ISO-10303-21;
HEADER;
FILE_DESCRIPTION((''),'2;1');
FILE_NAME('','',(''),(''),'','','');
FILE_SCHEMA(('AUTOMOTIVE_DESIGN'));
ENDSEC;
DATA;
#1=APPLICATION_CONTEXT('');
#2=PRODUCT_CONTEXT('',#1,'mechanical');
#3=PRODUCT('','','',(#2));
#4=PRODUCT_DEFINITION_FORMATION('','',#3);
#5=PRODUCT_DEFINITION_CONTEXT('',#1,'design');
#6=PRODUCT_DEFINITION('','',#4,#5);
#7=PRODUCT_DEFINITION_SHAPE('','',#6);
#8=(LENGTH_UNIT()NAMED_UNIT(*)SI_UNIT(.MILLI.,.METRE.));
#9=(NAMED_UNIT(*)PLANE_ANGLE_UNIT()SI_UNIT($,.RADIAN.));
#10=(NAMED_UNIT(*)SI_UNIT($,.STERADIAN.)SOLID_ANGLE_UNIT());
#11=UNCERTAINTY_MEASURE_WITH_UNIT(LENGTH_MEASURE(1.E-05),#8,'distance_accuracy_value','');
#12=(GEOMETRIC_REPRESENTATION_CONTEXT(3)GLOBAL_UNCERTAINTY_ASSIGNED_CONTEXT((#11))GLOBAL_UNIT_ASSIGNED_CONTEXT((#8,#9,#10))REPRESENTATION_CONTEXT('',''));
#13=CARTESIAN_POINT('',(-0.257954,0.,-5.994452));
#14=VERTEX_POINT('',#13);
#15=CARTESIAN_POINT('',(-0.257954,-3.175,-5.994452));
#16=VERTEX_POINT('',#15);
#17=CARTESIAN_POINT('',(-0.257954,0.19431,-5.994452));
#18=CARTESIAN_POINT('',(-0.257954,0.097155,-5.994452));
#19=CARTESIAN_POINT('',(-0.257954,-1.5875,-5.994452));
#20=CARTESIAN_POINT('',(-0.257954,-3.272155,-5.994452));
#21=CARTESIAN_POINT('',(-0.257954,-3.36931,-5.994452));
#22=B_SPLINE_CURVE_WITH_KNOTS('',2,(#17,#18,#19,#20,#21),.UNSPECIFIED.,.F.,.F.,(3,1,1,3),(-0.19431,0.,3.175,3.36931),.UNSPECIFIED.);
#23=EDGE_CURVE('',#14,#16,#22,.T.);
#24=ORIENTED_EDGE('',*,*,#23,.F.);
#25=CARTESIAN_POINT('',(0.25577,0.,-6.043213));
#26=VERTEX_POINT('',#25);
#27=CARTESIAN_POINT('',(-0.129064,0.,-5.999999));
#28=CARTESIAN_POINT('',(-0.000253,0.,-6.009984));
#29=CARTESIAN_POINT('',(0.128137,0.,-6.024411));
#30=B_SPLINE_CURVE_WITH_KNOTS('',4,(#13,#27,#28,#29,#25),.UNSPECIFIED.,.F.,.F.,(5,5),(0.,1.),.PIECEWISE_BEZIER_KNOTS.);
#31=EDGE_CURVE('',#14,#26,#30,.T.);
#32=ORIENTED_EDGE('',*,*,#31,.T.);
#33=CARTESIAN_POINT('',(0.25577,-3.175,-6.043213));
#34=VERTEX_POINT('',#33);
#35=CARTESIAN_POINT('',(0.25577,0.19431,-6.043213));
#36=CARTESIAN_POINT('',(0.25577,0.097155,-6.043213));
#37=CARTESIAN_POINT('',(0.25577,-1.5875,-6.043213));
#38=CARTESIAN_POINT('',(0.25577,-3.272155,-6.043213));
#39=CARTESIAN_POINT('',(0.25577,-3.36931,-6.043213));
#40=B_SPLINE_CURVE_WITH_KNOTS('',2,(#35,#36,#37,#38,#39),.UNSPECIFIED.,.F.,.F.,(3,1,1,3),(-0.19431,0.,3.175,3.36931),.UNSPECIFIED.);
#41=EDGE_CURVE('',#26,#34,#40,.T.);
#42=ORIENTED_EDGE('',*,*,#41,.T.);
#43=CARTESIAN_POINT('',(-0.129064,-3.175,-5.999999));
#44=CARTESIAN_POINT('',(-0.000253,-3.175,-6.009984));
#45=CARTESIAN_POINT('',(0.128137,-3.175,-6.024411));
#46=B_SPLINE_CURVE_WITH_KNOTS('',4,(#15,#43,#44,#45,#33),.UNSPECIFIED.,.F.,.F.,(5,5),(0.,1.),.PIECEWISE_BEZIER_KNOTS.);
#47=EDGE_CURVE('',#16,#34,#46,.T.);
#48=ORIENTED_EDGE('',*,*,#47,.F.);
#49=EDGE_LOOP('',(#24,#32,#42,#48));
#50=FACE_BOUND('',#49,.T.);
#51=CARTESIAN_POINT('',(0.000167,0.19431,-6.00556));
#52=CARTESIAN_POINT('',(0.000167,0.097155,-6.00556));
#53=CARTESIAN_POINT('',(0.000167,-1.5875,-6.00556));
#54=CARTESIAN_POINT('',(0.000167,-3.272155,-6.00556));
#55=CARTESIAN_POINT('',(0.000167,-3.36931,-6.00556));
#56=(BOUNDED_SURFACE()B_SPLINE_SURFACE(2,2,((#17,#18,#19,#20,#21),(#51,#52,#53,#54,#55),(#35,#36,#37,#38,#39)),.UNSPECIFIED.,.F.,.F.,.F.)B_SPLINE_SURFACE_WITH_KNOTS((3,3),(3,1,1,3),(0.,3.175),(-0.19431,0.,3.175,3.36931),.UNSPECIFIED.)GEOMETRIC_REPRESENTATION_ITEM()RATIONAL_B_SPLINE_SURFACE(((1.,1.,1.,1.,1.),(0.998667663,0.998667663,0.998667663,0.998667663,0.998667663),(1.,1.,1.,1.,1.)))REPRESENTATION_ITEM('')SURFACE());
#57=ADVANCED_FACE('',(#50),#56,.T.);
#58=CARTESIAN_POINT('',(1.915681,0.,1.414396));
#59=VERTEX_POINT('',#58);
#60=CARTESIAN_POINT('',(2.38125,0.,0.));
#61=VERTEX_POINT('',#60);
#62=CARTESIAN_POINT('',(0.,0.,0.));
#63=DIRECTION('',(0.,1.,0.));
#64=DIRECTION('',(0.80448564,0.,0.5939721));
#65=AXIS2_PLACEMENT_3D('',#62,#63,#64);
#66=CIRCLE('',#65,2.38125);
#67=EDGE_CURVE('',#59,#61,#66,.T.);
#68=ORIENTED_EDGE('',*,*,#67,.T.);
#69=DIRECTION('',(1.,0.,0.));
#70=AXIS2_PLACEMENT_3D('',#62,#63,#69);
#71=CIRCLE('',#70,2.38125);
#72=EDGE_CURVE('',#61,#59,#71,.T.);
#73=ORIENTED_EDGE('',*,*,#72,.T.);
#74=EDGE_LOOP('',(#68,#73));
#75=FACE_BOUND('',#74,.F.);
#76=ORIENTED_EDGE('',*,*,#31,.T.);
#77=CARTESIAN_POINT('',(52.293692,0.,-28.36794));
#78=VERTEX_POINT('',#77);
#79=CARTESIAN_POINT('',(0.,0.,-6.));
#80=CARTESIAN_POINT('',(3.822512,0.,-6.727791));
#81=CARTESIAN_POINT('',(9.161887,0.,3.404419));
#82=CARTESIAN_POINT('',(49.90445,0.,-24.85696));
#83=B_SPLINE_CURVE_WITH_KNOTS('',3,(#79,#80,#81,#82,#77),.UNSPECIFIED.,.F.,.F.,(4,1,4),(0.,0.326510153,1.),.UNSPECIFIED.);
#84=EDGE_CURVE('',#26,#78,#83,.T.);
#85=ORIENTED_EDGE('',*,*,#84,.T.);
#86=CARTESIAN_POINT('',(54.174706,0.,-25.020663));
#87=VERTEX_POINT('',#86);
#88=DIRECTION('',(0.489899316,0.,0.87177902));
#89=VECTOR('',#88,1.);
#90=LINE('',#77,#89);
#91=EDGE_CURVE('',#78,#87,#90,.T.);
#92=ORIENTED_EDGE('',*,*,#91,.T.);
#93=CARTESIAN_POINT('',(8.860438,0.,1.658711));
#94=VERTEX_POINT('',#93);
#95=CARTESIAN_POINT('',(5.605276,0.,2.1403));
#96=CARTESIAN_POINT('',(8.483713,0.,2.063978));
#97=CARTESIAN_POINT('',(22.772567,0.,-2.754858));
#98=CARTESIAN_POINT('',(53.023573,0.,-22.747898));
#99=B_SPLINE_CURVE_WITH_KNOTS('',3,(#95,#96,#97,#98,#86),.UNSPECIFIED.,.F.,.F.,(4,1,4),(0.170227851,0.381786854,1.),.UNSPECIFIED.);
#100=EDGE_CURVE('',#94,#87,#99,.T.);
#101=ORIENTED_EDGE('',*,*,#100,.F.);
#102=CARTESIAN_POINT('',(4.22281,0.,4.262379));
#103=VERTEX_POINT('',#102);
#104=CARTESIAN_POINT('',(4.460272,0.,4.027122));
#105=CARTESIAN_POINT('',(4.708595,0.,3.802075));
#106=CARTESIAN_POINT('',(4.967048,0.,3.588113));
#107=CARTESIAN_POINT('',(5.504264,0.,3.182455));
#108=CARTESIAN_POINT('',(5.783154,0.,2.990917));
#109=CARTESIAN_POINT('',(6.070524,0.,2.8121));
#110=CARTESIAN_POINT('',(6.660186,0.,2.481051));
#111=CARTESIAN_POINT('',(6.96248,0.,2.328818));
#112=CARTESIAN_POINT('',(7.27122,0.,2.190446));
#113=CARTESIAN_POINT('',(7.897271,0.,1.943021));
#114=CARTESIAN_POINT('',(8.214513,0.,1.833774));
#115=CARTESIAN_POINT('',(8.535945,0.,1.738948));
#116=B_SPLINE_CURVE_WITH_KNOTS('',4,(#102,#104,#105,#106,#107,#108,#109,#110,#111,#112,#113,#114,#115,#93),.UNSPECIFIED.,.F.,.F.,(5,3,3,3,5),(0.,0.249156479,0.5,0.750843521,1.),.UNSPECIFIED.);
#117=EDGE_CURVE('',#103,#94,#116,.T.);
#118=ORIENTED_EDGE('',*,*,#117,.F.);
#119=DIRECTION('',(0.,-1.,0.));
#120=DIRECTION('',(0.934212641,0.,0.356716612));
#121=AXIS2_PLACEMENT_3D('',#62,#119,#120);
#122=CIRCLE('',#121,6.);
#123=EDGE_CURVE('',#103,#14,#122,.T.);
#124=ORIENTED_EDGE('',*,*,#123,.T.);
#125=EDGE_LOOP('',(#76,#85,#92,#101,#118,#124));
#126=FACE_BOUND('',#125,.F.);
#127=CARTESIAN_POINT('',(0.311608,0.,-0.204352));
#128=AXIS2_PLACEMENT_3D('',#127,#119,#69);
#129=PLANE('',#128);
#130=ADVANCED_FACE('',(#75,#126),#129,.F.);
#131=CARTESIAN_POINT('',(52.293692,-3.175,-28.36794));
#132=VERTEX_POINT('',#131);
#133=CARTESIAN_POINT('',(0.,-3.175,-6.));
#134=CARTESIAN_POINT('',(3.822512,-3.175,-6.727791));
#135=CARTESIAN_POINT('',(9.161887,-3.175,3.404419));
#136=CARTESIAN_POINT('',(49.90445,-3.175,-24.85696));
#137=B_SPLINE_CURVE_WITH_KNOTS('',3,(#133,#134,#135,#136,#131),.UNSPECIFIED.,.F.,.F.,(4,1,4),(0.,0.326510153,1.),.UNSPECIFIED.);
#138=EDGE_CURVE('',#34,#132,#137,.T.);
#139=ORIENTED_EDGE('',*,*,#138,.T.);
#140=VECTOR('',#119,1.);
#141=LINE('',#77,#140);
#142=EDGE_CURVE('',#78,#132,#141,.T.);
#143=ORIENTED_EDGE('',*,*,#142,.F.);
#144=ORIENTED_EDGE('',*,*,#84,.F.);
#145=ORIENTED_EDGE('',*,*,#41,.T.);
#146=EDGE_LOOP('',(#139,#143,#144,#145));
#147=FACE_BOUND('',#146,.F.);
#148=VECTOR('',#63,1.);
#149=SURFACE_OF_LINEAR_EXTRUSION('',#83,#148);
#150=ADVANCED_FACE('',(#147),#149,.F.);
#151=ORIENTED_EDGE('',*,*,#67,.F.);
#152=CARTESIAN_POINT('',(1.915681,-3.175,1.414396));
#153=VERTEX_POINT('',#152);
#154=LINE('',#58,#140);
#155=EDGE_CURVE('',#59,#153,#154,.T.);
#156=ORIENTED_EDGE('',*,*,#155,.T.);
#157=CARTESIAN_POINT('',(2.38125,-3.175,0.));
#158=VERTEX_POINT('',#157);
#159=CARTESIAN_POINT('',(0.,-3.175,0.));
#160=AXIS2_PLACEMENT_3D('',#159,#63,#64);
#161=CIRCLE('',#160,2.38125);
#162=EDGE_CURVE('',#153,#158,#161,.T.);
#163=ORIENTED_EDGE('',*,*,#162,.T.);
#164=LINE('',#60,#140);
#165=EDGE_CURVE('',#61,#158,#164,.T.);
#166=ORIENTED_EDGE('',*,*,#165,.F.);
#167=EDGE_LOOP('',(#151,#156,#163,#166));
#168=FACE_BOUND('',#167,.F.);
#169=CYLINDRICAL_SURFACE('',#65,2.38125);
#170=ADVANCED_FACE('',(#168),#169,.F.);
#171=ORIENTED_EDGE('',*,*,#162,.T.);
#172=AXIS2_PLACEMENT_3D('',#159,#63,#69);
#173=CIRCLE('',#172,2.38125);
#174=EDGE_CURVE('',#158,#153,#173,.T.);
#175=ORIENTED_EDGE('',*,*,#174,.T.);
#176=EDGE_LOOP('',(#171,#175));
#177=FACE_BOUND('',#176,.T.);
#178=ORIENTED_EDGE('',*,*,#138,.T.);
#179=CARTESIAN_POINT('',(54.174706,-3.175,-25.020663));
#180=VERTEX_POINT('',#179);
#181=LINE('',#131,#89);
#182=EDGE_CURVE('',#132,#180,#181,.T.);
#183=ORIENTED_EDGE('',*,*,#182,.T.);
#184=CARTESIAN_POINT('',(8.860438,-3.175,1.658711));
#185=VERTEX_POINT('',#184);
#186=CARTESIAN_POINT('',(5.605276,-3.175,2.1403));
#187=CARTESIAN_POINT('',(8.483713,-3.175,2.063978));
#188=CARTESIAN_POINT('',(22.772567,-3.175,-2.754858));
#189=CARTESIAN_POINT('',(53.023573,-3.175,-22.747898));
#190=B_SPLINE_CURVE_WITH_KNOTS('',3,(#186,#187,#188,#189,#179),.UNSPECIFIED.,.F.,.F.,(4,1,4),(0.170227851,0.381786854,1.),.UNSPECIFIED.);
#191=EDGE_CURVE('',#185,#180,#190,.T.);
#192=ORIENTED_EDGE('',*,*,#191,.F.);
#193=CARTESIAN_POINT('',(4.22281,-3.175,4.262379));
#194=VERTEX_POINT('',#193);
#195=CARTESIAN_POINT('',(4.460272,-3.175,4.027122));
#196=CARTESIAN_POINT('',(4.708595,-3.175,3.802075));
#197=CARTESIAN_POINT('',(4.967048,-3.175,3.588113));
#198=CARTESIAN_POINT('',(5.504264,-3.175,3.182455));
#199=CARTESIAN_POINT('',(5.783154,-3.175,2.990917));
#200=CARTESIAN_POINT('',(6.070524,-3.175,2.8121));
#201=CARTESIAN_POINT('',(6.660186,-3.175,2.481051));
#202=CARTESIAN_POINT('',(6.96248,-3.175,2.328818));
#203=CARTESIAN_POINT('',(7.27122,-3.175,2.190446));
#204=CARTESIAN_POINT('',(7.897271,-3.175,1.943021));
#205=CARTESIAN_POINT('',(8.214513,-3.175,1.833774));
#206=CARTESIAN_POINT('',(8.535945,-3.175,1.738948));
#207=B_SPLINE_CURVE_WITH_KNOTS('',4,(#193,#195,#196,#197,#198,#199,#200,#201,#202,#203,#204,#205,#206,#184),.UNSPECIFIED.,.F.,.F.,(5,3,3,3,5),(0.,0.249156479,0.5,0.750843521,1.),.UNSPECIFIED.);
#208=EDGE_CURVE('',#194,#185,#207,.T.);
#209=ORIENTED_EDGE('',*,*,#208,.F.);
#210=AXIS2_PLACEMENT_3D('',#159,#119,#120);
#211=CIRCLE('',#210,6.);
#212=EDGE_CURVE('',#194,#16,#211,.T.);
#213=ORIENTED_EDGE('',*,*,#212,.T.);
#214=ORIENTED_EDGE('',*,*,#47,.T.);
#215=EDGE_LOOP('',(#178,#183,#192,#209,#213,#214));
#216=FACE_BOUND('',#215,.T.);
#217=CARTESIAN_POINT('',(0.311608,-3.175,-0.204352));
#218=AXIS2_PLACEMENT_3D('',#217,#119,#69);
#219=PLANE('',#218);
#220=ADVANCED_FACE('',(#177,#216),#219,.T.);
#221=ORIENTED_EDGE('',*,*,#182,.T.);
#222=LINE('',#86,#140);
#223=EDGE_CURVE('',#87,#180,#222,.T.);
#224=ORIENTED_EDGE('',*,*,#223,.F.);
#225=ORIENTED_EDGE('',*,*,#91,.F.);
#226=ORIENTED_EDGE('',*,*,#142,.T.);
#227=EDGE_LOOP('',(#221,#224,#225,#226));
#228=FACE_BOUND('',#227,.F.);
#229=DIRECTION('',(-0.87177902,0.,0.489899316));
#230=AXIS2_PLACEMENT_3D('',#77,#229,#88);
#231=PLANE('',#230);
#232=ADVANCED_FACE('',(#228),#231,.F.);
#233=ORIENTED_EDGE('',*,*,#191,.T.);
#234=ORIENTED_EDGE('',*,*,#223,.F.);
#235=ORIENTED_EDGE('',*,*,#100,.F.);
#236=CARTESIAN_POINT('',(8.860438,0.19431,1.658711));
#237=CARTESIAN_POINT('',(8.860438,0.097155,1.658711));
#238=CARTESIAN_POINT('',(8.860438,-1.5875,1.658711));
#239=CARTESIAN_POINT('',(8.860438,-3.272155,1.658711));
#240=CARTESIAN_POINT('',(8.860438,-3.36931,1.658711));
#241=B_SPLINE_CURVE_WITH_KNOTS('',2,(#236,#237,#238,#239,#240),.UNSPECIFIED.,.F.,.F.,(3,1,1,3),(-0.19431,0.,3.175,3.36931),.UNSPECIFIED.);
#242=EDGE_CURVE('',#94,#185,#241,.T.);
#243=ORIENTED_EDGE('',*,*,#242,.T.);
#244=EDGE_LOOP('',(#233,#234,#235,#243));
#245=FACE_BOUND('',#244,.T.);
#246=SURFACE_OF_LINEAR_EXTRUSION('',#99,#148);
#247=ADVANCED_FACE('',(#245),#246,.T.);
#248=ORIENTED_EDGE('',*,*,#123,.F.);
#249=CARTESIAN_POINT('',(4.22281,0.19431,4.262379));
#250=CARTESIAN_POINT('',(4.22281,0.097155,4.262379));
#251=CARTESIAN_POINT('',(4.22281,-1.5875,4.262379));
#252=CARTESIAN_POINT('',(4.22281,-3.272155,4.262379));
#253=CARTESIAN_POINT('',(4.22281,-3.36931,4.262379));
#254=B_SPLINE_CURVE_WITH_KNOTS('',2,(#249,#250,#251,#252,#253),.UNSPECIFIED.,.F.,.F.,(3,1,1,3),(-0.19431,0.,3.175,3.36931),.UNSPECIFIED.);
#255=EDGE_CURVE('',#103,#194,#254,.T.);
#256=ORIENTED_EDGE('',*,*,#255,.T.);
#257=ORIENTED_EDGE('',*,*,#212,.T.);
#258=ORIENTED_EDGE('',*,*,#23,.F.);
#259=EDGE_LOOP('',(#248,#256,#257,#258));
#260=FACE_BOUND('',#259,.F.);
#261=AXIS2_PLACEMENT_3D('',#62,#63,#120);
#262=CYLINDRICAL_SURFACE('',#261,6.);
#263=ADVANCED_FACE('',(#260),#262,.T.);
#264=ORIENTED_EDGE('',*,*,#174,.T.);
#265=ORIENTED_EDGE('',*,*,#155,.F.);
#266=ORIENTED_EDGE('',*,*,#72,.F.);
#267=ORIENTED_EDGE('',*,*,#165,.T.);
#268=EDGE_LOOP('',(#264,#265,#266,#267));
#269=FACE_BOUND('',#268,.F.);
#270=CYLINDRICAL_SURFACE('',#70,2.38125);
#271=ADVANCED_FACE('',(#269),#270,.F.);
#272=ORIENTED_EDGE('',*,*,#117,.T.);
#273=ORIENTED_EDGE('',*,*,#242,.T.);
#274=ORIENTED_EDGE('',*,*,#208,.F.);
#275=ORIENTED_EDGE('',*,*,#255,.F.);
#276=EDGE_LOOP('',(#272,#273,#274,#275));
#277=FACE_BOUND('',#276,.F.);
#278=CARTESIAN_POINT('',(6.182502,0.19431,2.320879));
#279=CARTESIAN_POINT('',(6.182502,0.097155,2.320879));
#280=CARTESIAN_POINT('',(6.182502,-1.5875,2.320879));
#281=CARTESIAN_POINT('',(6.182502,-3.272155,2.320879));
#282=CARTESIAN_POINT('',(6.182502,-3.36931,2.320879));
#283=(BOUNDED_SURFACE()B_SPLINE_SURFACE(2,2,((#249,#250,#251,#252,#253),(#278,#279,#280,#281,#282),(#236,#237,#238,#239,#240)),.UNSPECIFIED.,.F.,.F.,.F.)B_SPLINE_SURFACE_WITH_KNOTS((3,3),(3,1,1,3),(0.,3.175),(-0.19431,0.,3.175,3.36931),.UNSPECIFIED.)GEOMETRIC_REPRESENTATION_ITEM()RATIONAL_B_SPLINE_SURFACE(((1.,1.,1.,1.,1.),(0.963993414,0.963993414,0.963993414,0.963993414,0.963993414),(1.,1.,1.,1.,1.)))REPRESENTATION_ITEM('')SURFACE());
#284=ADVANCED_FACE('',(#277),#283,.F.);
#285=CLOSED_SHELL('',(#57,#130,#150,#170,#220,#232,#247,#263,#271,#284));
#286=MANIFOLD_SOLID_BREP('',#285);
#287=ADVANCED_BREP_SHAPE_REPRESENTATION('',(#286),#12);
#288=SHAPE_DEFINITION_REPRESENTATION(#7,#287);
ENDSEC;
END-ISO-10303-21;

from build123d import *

# Parameters (mm, degrees)
F1_DEPTH = 3.175
F2_R     = 10
F3_R     = 5


# Not quite as in the source:
# - a length typed as a fraction of an inch, garbled in the dataset ("3 / 203.2 mm" for 3/8 in), is restored


with BuildPart() as f1:
    # F0 (on Front) → F1 (new body)
    with BuildSketch(Plane.XZ):
        with BuildLine():
            ThreePointArc((6, 0), (5.9004938384, 1.0881968861), (5.6052758457, 2.1402996738))
            ThreePointArc((5.6052758457, 2.1402996738), (-4.9417506029, 3.4028078081), (0, -6))
            ThreePointArc((0, -6), (4.2426406871, -4.2426406871), (6, 0))
        make_face()
        with BuildLine():
            ThreePointArc((1.9156814293, 1.4143960633), (2.2618651558, 0.7445250698), (2.38125, 0))
            ThreePointArc((2.38125, 0), (-2.2618651558, -0.7445250698), (1.9156814293, 1.4143960633))
        make_face(mode=Mode.SUBTRACT)
        with BuildLine():
            add(Edge.make_bspline(
                [(5.6052758457, 2.1402996738), (8.4837125149, 2.063977977), (22.7725665876, -2.7548580827), (53.0235731676, -22.747897807), (54.1747063398, -25.0206626952)],
                knots=[0.1702278507, 0.1702278507, 0.1702278507, 0.1702278507, 0.381786854, 1, 1, 1, 1], degree=3))
            ThreePointArc((5.6052758457, 2.1402996738), (5.9004938384, 1.0881968861), (6, 0))
            ThreePointArc((6, 0), (4.2426406871, -4.2426406871), (0, -6))
            add(Edge.make_bspline(
                [(0, -6), (3.8225116527, -6.7277911583), (9.1618873845, 3.4044193042), (49.9044501281, -24.856960065), (52.2936917841, -28.3679403365)],
                knots=[0, 0, 0, 0, 0.3265101528, 1, 1, 1, 1], degree=3))
            Line((52.2936917841, -28.3679403365), (54.1747063398, -25.0206626952))
        make_face()
    extrude(amount=F1_DEPTH)

    # F2
    f2_edges = [f1.edges().sort_by_distance(p)[0] for p in [
        (5.605276, -1.5875, 2.1403),
    ]]
    fillet(f2_edges, radius=F2_R)

    # F3
    f3_edges = [f1.edges().sort_by_distance(p)[0] for p in [
        (0, -1.5875, -6),
    ]]
    fillet(f3_edges, radius=F3_R)


solid = f1.part
